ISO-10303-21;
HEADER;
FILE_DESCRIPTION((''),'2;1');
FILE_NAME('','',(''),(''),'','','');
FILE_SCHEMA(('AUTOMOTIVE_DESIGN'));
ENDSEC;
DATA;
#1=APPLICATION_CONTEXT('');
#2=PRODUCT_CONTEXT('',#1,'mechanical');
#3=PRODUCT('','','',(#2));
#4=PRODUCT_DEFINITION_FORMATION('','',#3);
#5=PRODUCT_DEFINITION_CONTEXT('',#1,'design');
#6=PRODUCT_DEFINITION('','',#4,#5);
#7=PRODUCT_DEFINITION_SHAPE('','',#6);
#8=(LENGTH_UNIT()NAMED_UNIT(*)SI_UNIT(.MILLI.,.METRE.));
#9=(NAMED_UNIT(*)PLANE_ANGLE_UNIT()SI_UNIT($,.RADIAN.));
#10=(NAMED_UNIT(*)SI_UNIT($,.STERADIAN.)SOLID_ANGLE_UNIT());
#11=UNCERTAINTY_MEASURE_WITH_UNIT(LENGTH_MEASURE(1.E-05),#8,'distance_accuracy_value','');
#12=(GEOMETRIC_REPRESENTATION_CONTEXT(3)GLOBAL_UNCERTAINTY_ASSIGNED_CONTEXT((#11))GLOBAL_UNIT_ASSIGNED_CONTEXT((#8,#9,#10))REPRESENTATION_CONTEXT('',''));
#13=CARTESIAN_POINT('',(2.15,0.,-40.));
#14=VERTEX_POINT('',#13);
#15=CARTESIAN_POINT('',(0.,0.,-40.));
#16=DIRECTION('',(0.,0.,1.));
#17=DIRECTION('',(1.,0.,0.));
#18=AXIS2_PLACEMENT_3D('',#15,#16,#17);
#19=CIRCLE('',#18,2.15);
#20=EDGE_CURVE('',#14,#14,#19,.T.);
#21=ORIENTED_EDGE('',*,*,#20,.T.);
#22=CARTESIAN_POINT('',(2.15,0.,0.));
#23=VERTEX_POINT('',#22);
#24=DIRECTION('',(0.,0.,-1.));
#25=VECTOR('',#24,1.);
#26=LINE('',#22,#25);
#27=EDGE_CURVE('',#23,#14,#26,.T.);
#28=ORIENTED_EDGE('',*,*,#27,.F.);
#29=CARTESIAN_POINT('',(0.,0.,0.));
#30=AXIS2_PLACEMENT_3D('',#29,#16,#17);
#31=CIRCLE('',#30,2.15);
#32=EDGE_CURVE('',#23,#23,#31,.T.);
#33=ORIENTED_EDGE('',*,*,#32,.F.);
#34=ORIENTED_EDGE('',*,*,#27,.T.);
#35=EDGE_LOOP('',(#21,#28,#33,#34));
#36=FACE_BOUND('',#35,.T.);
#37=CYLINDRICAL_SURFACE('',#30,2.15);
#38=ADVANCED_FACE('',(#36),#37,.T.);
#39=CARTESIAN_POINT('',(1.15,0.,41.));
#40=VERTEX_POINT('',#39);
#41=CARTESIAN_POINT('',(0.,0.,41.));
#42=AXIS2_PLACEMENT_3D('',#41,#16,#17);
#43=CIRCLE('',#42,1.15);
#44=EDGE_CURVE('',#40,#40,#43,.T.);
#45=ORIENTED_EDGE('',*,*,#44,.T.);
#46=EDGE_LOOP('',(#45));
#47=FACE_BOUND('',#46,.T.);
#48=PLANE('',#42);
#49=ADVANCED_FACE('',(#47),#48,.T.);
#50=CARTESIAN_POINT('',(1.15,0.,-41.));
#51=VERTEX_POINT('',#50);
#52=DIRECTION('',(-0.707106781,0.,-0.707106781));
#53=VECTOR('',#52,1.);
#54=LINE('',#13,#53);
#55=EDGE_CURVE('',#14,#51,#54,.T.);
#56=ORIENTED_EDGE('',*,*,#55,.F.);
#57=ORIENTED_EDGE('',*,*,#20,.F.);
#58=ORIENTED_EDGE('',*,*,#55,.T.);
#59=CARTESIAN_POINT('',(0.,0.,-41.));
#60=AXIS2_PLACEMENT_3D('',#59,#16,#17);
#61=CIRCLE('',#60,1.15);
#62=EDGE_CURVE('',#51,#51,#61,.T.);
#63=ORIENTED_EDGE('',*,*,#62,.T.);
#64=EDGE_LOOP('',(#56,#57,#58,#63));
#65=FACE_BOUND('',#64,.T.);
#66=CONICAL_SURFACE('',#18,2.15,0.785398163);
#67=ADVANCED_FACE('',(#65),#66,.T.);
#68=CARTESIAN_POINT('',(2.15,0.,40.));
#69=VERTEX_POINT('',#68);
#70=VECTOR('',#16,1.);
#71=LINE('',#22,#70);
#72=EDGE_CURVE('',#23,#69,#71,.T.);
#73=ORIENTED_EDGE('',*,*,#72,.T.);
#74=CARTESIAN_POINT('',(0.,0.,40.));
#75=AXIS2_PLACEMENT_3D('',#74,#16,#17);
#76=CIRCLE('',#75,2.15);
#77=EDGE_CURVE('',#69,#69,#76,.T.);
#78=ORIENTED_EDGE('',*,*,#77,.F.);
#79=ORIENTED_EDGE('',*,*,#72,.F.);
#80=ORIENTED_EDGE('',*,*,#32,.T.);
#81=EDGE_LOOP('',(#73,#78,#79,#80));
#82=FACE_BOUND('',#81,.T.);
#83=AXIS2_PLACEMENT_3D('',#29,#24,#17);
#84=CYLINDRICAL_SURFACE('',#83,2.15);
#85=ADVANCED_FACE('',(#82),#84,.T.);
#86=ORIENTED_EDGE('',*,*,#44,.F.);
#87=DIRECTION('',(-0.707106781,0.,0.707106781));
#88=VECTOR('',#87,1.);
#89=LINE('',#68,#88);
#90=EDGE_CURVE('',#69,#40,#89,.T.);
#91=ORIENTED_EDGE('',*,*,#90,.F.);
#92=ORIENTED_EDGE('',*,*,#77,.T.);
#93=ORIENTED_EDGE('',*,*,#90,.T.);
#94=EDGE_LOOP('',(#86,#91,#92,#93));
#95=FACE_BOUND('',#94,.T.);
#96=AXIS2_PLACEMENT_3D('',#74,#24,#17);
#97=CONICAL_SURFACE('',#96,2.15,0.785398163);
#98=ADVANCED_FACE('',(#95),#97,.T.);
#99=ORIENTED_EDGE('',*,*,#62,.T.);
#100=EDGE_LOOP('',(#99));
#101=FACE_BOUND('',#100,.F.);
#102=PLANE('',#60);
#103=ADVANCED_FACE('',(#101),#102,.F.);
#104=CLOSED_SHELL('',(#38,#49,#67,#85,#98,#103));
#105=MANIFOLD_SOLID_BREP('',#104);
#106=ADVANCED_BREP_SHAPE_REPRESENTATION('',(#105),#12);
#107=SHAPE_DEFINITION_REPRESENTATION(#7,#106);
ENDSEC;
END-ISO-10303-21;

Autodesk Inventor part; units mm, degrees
ref_plane "YZ Plane" through (0, 0, 0) normal (1, 0, 0) x (0, 1, 0)
ref_plane "XZ Plane" through (0, 0, 0) normal (0, 1, 0) x (-1, 0, 0)
ref_plane "XY Plane" through (0, 0, 0) normal (0, 0, 1) x (1, 0, 0)
sketch "Sketch1" plane through (0, 0, 0) normal (0, 0, 1) x (1, 0, 0)
  circle A0 centre (0, 0) radius 2.15
  dimension "d0" = 4.3
extrude "Extrusion1" add sketch "Sketch1" along normal mid plane 82
chamfer "Chamfer1" distance 1 angle 45 2 edges at (-2.15, 0, 41) (-2.15, 0, -41)
thread "Thread1" size "M4.5x0.75" class "6g" standard "ISO Metric profile" length 5
thread "Thread2" size "M4.5x0.75" class "6g" standard "ANSI Metric M Profile" length 5
properties part number "ES117_Axis"
